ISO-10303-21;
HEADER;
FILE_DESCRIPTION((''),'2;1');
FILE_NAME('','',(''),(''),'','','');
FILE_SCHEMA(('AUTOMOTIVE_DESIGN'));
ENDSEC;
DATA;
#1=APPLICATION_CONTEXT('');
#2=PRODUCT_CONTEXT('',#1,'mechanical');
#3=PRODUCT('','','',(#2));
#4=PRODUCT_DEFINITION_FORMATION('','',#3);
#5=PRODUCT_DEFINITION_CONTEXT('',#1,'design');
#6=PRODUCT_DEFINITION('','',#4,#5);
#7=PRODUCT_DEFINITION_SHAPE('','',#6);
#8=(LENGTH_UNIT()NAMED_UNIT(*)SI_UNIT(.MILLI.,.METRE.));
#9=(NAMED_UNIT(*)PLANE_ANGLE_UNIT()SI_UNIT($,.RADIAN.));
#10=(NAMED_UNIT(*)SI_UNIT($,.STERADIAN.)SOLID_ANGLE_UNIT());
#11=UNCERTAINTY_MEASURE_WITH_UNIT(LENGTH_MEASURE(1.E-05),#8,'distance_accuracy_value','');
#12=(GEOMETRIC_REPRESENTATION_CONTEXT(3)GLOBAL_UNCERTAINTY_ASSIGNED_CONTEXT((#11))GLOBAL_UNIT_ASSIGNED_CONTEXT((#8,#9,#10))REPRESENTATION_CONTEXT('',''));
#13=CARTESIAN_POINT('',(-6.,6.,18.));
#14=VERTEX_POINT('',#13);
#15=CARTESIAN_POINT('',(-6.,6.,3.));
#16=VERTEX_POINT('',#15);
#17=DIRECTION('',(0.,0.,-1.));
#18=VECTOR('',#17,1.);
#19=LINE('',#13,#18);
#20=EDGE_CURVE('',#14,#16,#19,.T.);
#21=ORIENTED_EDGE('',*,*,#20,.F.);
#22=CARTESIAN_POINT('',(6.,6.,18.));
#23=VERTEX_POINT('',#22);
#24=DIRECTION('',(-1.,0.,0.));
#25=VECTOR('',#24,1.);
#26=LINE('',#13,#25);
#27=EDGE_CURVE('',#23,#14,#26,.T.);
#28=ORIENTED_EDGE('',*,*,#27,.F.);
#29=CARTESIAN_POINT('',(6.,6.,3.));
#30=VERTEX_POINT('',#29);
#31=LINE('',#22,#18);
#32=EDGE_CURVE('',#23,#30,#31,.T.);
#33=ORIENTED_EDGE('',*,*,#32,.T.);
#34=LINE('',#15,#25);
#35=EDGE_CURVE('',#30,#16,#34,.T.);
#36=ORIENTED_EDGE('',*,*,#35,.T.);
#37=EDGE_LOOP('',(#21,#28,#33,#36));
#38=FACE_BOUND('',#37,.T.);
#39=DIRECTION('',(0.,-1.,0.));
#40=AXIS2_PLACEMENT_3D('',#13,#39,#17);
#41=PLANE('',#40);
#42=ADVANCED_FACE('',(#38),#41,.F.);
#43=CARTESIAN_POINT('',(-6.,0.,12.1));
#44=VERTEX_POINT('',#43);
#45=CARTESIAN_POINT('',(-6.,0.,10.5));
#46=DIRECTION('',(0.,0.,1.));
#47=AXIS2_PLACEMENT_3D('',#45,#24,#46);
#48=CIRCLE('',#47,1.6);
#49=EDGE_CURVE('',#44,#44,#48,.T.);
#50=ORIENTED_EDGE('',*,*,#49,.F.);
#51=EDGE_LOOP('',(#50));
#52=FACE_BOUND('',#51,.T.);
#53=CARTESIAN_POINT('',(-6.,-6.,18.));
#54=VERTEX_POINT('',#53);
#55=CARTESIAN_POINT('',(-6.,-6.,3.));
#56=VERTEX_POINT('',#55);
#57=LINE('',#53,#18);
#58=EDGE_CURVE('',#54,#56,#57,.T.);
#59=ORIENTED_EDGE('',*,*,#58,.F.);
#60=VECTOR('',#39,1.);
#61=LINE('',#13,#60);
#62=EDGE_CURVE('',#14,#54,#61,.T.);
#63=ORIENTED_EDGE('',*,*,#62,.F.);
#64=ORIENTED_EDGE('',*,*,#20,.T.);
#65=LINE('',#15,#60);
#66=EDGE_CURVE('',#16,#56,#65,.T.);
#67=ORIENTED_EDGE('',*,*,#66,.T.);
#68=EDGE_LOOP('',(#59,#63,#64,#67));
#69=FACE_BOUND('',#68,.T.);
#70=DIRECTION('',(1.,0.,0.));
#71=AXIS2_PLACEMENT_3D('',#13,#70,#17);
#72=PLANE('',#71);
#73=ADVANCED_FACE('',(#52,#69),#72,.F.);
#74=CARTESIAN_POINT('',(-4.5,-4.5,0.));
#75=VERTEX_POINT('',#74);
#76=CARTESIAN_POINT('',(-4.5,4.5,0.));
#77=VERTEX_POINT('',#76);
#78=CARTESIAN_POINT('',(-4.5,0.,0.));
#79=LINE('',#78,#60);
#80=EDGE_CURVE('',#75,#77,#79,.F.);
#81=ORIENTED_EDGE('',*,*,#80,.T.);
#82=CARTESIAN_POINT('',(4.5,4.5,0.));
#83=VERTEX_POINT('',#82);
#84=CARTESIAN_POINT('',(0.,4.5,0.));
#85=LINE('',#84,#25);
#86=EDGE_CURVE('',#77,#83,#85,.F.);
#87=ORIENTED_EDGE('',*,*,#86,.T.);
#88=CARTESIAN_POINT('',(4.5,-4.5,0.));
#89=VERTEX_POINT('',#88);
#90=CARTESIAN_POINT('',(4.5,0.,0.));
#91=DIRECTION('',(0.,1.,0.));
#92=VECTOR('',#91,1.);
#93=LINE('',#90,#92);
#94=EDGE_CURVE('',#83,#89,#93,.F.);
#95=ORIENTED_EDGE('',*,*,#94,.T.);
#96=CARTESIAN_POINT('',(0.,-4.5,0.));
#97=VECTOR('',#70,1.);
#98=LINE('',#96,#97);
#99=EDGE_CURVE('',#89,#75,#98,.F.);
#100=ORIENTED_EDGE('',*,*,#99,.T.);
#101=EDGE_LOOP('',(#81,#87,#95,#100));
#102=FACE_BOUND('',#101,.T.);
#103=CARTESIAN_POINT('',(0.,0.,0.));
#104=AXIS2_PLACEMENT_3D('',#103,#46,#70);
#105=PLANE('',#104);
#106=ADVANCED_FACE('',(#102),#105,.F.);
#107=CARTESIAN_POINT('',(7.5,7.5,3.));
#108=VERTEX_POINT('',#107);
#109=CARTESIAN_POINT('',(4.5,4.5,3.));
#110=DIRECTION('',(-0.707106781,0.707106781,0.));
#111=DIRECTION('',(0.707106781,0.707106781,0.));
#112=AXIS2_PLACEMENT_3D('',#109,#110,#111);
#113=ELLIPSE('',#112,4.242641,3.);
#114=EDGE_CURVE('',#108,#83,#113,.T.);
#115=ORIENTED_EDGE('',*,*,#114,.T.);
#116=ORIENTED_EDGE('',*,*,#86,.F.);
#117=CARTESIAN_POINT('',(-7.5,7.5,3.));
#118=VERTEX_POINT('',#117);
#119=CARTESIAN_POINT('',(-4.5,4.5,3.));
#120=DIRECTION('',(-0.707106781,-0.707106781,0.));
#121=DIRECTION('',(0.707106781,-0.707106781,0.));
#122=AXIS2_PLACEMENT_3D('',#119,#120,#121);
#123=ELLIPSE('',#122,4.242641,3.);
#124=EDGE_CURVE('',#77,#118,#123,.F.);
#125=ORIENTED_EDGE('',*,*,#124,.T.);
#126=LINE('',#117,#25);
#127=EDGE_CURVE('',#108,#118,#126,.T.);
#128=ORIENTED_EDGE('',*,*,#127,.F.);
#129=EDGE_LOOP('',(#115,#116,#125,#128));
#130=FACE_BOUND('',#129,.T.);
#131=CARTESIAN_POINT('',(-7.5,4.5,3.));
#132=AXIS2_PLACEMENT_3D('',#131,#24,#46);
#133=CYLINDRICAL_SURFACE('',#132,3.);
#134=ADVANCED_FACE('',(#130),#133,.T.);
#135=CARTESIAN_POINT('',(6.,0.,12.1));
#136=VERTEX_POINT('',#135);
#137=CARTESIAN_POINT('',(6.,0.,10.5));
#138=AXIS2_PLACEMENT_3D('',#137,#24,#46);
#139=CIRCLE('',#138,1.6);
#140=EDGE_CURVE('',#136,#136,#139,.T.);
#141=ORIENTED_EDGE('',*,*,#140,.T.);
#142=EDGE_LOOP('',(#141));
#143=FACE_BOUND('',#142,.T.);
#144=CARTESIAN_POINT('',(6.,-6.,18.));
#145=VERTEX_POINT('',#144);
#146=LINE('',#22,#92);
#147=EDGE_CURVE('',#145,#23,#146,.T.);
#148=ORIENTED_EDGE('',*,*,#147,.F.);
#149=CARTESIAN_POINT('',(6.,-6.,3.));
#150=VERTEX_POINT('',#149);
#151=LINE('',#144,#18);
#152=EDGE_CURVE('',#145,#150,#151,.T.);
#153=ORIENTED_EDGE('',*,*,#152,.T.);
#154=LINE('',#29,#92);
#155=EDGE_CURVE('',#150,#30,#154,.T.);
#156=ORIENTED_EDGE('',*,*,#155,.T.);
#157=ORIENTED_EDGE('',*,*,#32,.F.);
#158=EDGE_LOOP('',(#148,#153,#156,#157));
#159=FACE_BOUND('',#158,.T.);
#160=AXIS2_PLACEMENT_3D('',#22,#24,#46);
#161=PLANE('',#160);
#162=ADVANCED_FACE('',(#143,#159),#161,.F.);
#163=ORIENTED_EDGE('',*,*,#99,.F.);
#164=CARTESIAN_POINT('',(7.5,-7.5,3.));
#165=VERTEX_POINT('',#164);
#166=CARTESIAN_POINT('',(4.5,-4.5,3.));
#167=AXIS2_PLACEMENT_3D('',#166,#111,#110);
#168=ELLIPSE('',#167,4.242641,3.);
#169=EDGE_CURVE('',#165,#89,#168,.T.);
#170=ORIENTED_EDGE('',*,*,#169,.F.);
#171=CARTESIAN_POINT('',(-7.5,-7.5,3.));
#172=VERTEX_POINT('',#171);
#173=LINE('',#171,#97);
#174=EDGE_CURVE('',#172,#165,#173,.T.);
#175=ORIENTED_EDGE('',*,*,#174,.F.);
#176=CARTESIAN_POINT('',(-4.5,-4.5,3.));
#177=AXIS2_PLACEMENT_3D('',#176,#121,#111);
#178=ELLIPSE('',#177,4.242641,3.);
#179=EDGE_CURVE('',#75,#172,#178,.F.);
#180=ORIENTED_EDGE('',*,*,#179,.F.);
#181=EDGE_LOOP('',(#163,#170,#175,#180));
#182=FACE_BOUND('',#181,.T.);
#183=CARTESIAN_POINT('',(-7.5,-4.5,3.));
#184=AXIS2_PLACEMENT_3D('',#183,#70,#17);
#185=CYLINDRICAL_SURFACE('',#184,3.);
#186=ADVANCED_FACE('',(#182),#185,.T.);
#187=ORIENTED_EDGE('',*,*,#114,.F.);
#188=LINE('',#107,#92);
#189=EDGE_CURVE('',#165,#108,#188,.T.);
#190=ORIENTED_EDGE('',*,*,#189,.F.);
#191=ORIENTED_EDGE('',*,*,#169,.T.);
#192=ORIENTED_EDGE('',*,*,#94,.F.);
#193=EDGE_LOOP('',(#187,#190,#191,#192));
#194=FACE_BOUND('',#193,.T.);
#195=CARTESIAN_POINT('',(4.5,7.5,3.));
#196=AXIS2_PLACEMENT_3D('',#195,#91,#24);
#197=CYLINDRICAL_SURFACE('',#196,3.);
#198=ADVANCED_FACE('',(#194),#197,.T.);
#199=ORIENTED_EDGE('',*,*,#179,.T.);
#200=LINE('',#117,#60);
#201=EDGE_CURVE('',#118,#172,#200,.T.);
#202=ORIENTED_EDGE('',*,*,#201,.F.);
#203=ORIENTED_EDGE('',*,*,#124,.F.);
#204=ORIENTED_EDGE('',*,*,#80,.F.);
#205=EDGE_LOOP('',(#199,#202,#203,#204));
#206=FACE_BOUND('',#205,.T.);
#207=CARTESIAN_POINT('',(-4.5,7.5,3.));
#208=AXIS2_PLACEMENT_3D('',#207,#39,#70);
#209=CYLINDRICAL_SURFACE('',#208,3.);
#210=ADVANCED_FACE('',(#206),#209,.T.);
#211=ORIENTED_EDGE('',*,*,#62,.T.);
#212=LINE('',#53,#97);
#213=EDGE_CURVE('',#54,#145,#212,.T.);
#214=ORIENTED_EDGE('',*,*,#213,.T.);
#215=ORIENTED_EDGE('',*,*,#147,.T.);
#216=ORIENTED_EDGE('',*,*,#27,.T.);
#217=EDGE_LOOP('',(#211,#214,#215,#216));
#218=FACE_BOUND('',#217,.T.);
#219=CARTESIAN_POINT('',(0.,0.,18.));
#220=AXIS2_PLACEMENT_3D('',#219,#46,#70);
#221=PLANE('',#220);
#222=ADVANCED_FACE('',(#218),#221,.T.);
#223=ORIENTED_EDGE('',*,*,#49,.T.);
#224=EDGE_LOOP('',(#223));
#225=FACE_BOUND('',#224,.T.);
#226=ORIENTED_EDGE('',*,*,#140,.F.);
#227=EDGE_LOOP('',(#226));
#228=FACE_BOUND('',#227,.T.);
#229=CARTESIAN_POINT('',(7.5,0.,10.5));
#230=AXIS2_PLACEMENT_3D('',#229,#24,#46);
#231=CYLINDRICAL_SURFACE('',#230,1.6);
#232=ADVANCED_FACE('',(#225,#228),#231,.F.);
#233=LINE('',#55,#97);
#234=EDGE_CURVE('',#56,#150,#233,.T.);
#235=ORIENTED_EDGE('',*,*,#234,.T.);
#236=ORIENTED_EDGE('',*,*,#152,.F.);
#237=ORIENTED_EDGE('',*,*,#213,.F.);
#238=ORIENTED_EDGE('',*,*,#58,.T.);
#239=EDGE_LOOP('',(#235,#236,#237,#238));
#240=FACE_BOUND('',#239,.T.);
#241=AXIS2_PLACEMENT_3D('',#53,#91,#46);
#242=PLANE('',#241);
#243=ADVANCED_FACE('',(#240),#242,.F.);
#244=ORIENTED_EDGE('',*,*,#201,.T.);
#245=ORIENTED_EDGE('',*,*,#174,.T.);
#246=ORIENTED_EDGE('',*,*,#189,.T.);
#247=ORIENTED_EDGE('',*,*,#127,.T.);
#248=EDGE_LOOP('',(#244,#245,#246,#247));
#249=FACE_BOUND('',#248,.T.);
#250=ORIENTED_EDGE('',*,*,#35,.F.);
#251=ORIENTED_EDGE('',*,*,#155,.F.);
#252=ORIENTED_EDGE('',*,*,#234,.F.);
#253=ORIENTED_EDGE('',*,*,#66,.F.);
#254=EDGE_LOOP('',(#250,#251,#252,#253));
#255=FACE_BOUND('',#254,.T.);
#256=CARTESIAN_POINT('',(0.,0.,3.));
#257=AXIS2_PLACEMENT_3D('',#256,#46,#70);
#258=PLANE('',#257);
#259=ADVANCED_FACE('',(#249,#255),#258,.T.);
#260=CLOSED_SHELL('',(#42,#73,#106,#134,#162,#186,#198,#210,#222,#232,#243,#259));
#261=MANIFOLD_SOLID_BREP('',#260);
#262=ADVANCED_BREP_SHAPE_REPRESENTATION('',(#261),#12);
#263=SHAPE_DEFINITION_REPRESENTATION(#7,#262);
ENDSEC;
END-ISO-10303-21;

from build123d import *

# Parameters (mm, degrees)
SKETCH_8_W          = 15
SKETCH_8_H          = 15
EXTRUDE_3_DEPTH     = 3
SKETCH_9_W          = 12
SKETCH_9_H          = 12
EXTRUDE_4_DEPTH     = 15
SKETCH_10_R         = 1.6
CUT_EXTRUDE_2_DEPTH = 24.717082451
FILLET_2_R          = 3


with BuildPart() as part:
    # ｽｹｯﾁ8 → ﾎﾞｽ - 押し出し3 (new body)
    with BuildSketch(Plane.XY):
        Rectangle(SKETCH_8_W, SKETCH_8_H)
    extrude(amount=EXTRUDE_3_DEPTH)

    # ｽｹｯﾁ9 → ﾎﾞｽ - 押し出し4 (add)
    with BuildSketch(Plane.XY.offset(3)):
        Rectangle(SKETCH_9_W, SKETCH_9_H)
    extrude(amount=EXTRUDE_4_DEPTH)

    # ｽｹｯﾁ10 → ｶｯﾄ - 押し出し2 (cut, through all)
    with BuildSketch(Plane.ZY.offset(6)):
        with Locations((10.5, 0)):
            Circle(SKETCH_10_R)
    extrude(amount=-CUT_EXTRUDE_2_DEPTH, mode=Mode.SUBTRACT)

    # ﾌｨﾚｯﾄ2
    fillet_2_edges = [part.edges().sort_by_distance(p)[0] for p in [
        (0, 7.5, 0),
        (-7.5, 0, 0),
        (0, -7.5, 0),
        (7.5, 0, 0),
    ]]
    fillet(fillet_2_edges, radius=FILLET_2_R - 0.0001)  # a hair under: the kernel refuses the full size


solid = part.part
